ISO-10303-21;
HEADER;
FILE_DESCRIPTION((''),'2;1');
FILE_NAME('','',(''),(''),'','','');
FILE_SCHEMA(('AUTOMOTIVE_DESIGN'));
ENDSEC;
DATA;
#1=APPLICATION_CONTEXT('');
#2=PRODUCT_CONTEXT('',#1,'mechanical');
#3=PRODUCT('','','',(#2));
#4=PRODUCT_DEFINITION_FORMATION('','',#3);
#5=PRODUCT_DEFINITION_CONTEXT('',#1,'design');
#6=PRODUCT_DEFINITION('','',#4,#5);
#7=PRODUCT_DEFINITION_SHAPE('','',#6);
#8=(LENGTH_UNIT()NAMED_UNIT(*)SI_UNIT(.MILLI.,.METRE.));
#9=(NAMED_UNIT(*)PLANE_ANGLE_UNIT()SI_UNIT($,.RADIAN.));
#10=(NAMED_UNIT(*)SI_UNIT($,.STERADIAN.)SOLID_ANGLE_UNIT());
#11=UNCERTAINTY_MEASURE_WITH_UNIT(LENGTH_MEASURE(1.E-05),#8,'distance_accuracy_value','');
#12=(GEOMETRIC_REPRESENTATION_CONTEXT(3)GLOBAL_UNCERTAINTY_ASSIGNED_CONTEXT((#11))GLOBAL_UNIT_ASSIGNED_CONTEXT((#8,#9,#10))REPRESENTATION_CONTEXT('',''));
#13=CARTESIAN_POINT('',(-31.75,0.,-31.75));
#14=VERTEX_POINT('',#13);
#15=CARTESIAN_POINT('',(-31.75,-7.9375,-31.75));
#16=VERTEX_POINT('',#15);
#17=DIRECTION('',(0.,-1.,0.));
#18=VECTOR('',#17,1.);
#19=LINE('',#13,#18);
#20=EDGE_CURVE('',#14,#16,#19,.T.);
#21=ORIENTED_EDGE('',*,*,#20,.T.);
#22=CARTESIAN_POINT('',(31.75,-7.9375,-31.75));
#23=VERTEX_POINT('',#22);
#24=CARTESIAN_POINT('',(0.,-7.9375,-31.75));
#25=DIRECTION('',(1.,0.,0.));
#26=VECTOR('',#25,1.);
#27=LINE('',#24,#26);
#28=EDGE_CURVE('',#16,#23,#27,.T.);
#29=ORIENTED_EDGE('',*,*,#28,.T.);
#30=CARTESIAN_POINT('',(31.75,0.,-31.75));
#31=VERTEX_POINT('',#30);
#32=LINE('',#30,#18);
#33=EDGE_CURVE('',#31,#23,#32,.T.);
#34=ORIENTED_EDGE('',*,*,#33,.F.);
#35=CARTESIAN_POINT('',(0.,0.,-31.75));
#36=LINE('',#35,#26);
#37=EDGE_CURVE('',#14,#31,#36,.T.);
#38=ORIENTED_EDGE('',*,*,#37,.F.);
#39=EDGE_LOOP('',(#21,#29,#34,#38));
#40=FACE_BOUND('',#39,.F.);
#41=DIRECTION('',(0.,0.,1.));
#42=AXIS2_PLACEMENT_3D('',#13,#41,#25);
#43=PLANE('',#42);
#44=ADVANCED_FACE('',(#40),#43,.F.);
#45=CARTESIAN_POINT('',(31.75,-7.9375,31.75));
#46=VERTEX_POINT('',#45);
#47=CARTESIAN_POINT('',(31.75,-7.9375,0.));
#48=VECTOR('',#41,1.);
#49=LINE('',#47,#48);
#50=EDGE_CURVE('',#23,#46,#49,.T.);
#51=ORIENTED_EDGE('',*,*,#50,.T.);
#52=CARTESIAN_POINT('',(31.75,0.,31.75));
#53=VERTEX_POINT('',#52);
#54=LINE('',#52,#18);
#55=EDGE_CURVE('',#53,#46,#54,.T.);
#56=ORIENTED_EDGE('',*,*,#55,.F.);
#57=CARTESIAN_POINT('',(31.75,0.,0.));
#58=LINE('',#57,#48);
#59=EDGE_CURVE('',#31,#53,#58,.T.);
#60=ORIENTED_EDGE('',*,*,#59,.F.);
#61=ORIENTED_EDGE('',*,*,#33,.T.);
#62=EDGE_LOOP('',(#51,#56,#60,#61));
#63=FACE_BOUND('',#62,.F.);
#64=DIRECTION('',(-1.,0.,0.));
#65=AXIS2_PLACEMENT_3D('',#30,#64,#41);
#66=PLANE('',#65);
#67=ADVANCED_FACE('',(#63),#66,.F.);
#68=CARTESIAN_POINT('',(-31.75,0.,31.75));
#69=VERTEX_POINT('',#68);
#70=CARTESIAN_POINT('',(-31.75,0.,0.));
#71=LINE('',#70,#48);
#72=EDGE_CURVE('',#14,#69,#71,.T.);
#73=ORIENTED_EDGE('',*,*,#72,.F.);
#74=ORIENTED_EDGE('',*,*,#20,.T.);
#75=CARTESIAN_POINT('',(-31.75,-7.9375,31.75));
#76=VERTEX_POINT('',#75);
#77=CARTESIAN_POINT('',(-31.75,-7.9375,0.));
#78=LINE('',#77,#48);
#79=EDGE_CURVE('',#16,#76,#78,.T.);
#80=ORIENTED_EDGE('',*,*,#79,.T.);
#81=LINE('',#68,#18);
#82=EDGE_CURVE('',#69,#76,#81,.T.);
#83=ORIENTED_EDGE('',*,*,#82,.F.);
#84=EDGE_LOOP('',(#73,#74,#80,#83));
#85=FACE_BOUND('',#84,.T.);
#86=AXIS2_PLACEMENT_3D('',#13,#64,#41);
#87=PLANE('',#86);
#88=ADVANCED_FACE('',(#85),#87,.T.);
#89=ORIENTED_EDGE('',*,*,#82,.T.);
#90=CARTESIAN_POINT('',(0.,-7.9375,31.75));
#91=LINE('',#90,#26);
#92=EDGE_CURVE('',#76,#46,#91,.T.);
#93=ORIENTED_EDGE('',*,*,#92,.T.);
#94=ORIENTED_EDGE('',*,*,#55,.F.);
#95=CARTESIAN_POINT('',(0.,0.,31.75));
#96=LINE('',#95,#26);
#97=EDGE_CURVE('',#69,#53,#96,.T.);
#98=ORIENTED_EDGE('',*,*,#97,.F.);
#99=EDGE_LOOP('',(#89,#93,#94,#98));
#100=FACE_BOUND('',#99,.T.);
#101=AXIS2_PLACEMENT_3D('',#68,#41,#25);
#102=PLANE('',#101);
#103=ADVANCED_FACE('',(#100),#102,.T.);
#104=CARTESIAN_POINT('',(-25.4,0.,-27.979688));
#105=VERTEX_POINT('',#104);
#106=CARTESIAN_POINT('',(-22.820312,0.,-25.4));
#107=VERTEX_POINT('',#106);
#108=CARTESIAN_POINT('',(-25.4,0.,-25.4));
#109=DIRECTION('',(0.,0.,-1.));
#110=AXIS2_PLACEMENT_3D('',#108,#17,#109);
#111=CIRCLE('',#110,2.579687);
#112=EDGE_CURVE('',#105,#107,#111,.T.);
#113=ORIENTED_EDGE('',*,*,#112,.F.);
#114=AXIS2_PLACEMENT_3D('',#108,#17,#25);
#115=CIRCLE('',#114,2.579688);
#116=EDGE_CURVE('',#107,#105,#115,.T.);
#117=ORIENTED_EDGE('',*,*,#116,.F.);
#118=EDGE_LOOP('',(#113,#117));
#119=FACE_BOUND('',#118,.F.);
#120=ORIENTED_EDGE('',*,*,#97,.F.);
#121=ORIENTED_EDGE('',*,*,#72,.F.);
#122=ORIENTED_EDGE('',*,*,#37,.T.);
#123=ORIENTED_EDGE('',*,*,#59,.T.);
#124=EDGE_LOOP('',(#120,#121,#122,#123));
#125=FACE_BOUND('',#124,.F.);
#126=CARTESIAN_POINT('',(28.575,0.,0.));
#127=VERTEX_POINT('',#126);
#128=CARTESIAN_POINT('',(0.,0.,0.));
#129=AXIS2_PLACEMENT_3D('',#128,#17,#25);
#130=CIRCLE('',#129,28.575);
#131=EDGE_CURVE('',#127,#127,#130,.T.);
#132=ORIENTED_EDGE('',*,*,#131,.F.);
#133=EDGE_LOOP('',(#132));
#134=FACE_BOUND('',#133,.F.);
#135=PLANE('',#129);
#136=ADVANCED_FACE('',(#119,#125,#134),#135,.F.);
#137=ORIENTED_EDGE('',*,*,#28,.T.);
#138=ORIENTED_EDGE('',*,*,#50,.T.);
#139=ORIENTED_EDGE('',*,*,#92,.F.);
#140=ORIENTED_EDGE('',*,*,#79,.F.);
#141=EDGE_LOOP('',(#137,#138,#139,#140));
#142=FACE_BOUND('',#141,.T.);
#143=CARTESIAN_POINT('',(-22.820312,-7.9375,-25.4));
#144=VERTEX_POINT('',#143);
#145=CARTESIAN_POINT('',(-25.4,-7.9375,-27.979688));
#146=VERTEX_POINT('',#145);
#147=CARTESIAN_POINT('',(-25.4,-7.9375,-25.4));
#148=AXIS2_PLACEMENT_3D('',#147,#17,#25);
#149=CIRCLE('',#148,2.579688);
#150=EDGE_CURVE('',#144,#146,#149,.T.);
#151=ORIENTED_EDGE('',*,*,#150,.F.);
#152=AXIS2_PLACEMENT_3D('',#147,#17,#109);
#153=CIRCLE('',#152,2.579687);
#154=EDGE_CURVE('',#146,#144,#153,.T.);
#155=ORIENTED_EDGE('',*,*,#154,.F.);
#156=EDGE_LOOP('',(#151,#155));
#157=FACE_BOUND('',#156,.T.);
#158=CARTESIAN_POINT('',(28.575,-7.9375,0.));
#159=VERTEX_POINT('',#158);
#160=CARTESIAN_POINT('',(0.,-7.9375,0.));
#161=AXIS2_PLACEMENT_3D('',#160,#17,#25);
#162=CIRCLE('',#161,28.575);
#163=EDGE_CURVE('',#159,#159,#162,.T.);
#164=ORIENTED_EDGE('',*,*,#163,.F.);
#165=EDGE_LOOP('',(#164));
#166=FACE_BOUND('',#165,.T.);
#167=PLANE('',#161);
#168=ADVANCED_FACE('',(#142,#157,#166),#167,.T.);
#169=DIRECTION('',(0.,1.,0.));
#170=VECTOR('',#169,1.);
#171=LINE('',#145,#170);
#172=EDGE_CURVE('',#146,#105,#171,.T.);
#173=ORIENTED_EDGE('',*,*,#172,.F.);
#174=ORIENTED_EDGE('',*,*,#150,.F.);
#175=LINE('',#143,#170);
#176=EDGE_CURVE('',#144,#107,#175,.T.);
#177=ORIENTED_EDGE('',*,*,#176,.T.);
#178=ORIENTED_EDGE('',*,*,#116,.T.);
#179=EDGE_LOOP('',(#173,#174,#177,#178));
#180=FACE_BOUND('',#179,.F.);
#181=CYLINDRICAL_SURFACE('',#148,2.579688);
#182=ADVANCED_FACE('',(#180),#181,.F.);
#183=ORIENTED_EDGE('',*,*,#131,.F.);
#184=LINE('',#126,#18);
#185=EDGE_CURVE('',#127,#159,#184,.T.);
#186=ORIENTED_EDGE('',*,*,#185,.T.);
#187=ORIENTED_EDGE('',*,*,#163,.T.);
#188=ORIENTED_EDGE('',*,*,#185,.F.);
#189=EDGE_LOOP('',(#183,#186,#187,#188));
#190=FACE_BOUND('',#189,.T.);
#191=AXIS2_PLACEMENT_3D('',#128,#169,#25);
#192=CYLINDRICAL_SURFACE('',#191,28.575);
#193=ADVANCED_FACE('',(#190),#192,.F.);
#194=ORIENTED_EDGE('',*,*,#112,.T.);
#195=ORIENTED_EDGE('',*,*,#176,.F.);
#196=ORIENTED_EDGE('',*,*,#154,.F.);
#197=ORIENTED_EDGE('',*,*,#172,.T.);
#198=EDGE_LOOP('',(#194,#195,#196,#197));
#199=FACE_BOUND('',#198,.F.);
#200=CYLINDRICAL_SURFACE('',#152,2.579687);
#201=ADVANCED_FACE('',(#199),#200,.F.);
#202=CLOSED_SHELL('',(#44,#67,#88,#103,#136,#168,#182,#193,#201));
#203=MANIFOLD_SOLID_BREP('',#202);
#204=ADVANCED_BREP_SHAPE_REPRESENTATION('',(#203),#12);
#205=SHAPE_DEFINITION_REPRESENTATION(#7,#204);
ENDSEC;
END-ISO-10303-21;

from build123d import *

# Parameters (mm, degrees)
F0_W     = 63.5
F0_H     = 63.5
F0_R     = 28.575
F1_DEPTH = 7.9375
F3_DEPTH = 25.4


# Not quite as in the source:
# - a length typed as a fraction of an inch, garbled in the dataset ("3 / 203.2 mm" for 3/8 in), is restored


with BuildPart() as f1:
    # F0 (on Front) → F1 (new body)
    with BuildSketch(Plane.XZ):
        Rectangle(F0_W, F0_H)
        Circle(F0_R, mode=Mode.SUBTRACT)
    extrude(amount=F1_DEPTH)

    # F2 (on face) → F3 (cut)
    with BuildSketch(Plane.XZ.offset(7.9375)):
        with BuildLine():
            ThreePointArc((-22.8203125, -25.4), (-27.2241145246, -23.5758854754), (-25.4, -27.9796875))
            ThreePointArc((-25.4, -27.9796875), (-23.5758854754, -27.2241145246), (-22.8203125, -25.4))
        make_face()
    extrude(amount=-F3_DEPTH, mode=Mode.SUBTRACT)


solid = f1.part
